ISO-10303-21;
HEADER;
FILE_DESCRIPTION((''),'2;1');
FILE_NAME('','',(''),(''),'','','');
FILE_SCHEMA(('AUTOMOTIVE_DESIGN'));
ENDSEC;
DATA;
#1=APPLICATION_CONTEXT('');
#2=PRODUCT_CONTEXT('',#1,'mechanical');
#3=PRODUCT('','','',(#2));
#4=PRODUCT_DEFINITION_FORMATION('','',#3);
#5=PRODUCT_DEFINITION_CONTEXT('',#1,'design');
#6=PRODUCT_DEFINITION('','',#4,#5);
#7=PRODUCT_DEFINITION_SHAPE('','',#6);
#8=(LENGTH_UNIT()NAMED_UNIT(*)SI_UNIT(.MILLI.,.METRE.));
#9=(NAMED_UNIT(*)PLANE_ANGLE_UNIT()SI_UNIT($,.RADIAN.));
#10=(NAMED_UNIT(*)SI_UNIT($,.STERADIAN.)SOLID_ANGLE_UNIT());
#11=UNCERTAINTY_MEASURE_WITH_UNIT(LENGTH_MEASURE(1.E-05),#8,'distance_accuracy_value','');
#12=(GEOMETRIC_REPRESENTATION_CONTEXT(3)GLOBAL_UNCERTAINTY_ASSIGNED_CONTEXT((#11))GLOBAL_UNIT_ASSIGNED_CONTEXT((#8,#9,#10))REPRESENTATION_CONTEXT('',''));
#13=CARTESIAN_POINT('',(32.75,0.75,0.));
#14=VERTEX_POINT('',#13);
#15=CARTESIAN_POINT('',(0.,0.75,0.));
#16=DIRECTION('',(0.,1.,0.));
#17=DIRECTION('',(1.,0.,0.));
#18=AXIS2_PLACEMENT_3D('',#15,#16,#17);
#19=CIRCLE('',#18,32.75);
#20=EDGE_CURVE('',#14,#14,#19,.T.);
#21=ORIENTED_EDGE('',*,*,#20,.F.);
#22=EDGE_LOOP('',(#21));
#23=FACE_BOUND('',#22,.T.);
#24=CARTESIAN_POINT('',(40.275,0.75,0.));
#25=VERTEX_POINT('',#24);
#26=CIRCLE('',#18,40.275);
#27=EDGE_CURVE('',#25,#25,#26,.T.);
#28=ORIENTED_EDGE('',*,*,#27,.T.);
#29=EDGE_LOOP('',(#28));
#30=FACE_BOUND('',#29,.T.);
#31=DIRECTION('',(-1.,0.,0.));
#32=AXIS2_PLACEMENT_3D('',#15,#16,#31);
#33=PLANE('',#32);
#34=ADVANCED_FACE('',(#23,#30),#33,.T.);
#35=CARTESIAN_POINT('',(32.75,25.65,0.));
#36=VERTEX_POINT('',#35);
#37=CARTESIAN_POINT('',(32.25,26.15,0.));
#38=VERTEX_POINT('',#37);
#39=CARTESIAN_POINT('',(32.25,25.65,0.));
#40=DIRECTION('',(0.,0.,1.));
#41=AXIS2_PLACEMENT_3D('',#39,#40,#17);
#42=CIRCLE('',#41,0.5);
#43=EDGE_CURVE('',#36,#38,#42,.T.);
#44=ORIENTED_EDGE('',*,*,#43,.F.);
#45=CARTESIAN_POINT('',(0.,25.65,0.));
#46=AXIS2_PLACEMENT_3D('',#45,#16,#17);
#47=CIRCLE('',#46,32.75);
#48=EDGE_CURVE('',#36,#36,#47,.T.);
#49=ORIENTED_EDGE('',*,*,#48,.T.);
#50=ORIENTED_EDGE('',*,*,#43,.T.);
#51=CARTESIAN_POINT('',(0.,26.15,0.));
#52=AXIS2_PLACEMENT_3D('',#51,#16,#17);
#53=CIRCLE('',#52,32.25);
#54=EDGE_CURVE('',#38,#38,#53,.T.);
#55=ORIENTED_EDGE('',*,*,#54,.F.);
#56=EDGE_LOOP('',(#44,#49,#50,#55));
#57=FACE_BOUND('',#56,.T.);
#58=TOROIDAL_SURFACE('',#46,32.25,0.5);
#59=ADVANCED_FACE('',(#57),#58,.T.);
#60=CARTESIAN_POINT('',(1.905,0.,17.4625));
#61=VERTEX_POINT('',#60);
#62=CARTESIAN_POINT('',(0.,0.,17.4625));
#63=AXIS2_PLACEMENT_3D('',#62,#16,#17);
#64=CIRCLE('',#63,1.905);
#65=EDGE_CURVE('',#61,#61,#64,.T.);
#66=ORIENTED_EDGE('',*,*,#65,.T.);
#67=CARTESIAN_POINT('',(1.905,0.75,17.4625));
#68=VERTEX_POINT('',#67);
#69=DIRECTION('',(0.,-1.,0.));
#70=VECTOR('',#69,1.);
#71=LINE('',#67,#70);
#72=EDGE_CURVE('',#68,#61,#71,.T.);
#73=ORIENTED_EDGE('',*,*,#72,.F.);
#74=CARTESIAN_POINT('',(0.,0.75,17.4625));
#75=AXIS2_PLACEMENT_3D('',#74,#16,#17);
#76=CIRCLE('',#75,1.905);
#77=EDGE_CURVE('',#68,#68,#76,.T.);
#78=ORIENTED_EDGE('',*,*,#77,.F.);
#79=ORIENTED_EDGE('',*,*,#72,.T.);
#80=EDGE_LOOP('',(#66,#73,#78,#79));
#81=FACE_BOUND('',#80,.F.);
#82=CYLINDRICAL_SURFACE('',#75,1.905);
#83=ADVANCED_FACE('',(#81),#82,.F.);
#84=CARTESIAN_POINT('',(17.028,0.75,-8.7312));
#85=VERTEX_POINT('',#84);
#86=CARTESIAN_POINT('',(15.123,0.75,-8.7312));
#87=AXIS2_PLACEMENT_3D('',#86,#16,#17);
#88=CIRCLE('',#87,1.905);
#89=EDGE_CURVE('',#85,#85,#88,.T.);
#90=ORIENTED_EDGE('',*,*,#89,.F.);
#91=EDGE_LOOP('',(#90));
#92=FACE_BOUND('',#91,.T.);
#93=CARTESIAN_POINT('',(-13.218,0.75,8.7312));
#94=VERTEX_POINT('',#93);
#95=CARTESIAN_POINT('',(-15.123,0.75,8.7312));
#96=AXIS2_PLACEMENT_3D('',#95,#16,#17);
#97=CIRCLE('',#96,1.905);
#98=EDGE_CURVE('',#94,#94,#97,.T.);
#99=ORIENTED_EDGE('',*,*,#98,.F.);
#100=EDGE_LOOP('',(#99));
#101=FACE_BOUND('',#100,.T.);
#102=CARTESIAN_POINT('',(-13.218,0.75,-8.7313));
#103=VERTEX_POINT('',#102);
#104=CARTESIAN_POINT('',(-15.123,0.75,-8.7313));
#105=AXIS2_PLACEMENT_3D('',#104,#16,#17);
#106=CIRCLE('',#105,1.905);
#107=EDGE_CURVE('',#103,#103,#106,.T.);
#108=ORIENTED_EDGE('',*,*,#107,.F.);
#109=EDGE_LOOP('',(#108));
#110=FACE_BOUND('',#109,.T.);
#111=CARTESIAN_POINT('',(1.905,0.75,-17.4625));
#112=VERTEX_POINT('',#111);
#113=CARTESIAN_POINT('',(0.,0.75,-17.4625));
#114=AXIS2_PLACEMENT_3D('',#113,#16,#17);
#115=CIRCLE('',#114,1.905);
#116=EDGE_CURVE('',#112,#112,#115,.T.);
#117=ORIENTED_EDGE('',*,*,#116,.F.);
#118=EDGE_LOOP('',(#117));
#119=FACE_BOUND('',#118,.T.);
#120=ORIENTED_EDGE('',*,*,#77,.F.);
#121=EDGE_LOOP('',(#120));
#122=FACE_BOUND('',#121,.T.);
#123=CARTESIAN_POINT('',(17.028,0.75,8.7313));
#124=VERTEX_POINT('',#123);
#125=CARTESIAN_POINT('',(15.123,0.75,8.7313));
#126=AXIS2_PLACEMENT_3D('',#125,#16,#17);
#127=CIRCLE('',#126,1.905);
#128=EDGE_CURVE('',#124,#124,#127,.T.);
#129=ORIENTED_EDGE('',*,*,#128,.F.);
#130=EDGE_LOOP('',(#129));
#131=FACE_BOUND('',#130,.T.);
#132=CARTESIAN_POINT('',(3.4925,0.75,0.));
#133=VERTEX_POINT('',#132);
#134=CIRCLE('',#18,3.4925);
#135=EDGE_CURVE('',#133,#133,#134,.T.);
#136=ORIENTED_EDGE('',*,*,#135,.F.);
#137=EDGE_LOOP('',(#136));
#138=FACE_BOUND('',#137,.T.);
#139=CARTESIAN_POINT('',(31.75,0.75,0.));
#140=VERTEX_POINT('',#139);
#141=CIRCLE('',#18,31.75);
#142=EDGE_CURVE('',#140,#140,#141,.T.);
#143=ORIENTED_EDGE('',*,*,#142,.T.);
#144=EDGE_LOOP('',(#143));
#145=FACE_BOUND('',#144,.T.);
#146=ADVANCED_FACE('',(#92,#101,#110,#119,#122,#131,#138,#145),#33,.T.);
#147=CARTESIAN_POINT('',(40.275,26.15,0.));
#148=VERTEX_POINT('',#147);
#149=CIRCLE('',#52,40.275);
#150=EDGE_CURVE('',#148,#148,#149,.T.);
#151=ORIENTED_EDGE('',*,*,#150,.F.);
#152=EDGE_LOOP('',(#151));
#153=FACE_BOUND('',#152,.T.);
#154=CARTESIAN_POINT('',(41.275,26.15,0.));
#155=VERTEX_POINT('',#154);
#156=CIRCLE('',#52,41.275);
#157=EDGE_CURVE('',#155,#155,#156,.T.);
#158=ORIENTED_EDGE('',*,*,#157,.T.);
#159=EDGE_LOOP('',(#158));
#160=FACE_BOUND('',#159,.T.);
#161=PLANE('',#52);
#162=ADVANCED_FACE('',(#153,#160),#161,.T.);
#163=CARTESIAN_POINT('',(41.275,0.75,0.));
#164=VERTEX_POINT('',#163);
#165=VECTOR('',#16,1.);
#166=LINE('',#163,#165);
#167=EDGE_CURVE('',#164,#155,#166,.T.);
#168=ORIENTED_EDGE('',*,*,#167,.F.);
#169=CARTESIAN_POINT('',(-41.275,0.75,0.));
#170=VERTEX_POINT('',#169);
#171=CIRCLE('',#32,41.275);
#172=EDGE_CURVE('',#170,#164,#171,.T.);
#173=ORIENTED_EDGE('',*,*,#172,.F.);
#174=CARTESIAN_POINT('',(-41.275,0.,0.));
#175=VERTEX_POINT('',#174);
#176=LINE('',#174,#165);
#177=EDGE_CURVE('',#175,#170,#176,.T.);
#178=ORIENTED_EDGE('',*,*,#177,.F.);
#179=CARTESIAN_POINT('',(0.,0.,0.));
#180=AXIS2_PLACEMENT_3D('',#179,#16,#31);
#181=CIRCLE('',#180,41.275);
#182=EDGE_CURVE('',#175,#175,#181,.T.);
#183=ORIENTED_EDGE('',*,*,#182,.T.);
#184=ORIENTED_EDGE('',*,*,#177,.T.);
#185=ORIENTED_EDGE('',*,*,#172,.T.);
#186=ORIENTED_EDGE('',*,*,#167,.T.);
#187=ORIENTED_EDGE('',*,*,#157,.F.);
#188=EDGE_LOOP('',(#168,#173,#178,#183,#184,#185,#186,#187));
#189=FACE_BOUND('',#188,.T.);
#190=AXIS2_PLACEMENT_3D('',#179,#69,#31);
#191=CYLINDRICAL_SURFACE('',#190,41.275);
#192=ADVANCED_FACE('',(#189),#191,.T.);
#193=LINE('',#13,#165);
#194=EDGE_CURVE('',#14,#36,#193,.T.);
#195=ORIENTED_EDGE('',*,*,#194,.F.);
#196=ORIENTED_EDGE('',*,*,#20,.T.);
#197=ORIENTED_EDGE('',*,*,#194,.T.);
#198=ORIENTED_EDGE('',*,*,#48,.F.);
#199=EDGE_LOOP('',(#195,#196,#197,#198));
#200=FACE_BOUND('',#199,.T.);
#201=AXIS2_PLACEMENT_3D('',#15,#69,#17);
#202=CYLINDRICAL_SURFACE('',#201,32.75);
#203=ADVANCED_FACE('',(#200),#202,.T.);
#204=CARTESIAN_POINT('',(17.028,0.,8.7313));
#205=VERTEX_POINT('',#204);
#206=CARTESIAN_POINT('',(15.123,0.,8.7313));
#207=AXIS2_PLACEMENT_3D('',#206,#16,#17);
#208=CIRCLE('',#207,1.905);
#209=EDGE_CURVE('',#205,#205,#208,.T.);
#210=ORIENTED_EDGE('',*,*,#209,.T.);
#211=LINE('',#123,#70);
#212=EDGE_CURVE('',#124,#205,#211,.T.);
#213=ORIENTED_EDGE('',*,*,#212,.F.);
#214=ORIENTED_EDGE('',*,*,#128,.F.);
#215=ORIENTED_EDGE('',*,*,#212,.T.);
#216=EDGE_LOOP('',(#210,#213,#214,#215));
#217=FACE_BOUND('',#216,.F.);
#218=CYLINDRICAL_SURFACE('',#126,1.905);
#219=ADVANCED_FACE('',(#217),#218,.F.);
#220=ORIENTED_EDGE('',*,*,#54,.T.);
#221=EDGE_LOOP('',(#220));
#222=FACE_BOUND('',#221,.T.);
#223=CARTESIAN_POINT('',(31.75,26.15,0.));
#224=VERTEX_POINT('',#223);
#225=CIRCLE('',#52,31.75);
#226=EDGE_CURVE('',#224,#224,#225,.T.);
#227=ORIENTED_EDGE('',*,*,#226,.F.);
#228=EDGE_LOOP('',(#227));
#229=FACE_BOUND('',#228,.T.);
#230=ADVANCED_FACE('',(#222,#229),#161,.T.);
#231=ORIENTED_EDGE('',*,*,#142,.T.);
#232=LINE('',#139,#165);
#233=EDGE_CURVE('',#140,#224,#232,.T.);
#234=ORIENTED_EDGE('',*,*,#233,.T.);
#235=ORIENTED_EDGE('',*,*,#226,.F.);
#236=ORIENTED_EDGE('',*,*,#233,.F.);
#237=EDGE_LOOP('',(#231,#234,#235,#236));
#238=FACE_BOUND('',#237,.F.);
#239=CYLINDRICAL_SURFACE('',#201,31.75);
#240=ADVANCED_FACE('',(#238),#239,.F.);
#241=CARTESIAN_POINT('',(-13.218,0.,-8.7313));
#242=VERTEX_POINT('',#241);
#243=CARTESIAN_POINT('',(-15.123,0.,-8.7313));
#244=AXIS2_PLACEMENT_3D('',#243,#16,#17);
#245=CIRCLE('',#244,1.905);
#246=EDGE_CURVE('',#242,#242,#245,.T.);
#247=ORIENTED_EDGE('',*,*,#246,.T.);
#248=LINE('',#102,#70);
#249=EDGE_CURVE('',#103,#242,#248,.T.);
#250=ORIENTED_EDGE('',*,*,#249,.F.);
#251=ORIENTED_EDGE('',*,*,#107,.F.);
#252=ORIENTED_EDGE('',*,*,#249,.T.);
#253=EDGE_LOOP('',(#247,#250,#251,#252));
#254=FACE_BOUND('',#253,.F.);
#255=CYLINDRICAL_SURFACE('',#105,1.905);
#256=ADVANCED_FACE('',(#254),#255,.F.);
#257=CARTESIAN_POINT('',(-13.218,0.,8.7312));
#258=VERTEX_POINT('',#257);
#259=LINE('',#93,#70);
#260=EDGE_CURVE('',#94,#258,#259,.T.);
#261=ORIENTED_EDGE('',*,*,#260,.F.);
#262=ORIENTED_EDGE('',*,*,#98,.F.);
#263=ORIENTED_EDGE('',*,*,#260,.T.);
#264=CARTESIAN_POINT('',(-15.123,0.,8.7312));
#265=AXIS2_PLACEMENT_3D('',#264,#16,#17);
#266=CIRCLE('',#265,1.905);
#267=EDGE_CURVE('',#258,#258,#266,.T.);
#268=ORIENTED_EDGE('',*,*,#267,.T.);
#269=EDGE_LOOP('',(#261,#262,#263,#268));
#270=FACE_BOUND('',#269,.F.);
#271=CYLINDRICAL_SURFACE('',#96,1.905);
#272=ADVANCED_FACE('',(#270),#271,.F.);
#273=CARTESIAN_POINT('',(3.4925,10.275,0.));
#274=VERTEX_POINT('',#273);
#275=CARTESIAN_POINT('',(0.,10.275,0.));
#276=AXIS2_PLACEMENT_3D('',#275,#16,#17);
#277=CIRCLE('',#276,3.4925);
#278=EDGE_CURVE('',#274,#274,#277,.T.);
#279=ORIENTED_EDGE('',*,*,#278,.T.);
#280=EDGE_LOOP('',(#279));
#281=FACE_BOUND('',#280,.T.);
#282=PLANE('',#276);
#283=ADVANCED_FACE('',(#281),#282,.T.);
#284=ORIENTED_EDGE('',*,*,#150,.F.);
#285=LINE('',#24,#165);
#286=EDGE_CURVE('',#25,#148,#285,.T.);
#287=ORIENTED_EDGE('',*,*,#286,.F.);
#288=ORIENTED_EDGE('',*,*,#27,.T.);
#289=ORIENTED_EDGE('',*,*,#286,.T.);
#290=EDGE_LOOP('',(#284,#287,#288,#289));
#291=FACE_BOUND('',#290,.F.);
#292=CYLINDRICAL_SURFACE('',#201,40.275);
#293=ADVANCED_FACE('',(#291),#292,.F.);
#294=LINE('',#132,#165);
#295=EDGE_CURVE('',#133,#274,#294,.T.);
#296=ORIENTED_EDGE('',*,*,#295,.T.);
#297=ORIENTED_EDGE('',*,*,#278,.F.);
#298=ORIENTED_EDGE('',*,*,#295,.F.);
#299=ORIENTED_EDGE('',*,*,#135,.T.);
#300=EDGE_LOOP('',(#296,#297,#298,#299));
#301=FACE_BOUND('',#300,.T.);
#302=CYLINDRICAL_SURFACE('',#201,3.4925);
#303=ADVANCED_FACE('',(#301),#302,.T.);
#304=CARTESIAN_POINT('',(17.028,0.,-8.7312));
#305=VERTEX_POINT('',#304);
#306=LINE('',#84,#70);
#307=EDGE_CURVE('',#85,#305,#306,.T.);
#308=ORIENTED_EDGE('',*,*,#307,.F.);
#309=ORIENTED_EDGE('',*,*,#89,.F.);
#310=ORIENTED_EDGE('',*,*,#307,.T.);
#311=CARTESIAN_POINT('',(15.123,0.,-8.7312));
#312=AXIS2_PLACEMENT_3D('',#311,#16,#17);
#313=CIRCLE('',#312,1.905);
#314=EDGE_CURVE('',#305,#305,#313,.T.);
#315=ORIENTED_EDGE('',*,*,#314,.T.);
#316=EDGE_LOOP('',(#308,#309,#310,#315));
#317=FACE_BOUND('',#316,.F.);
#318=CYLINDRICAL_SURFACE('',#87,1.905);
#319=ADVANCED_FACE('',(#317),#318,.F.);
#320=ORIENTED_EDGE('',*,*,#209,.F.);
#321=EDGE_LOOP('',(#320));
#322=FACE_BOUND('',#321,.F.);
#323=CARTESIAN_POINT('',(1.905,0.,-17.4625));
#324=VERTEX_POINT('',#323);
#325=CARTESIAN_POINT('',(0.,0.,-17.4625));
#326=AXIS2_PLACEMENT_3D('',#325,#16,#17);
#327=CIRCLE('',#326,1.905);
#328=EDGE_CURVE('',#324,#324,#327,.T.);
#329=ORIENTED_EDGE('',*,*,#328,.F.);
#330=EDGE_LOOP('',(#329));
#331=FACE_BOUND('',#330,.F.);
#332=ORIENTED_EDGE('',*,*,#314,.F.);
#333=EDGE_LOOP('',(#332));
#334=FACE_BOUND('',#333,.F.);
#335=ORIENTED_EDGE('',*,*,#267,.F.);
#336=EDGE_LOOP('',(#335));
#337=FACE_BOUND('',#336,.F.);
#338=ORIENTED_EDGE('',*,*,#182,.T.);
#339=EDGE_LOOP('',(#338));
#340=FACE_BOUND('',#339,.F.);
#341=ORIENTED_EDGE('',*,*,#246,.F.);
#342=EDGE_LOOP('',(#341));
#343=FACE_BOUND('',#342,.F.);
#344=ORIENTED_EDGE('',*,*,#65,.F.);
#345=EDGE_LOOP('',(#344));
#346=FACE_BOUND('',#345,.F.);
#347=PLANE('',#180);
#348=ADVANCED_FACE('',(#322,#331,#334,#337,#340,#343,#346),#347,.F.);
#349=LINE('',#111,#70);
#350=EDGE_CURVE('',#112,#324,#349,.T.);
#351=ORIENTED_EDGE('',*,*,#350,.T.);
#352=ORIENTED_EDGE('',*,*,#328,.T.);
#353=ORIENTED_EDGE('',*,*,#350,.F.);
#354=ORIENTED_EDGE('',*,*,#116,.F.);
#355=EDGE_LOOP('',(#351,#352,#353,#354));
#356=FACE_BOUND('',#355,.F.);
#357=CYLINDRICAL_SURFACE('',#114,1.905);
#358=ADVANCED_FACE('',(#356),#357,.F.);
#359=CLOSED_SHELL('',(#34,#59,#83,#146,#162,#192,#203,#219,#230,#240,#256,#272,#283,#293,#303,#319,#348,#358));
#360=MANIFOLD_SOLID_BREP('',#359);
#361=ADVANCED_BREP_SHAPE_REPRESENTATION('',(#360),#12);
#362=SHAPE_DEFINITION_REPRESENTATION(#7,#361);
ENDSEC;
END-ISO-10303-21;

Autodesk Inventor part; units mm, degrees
ref_plane "YZ Plane" through (0, 0, 0) normal (1, 0, 0) x (0, 1, 0)
ref_plane "XZ Plane" through (0, 0, 0) normal (0, 1, 0) x (-1, 0, 0)
ref_plane "XY Plane" through (0, 0, 0) normal (0, 0, 1) x (1, 0, 0)
sketch "Sketch1" plane through (0, 0, 0) normal (0, 1, 0) x (-1, 0, 0)
  circle A0 centre (0, 0) radius 41.275
  dimension "d0" = 82.55
extrude "Extrusion1" add sketch "Sketch1" along normal blind 0.75
sketch "Sketch2" plane through (0, 0.75, 0) normal (0, 1, 0) x (1, 0, 0)
  circle A0 centre (0, 0) radius 31.75
  circle A1 centre (0, 0) radius 41.275 projected
  circle A2 centre (0, 0) radius 32.75
  circle A3 centre (0, 0) radius 40.275
  dimension "d3" = 63.5
  dimension "d4" = 1
  dimension "d5" = 1
extrude "Extrusion2" add sketch "Sketch2" along normal blind 25.4
fillet "Fillet1" radius 0.5 1 edges at (-32.75, 26.15, 0)
sketch "Sketch3" plane through (0, 0.75, 0) normal (0, 1, 0) x (1, 0, 0)
  circle A0 centre (0, 0) radius 17.4625 construction
  line L0 (0, 0) -> (0, -17.4625) construction
  circle A1 centre (0, -17.4625) radius 1.905
  circle A2 centre (15.123, -8.7313) radius 1.905
  circle A3 centre (15.123, 8.7312) radius 1.905
  circle A4 centre (0, 17.4625) radius 1.905
  circle A5 centre (-15.123, 8.7313) radius 1.905
  circle A6 centre (-15.123, -8.7312) radius 1.905
  dimension "d9" = 34.925
  dimension "d10" = 3.81
  dimension "d13" = 360
extrude "Extrusion3" cut sketch "Sketch3" against normal through all
sketch "Sketch4" plane through (0, 0.75, 0) normal (0, 1, 0) x (1, 0, 0)
  circle A0 centre (0, 0) radius 3.4925
  dimension "d17" = 6.985
extrude "Extrusion4" add sketch "Sketch4" along normal blind 9.525
properties part number "Mold - Wheel"
